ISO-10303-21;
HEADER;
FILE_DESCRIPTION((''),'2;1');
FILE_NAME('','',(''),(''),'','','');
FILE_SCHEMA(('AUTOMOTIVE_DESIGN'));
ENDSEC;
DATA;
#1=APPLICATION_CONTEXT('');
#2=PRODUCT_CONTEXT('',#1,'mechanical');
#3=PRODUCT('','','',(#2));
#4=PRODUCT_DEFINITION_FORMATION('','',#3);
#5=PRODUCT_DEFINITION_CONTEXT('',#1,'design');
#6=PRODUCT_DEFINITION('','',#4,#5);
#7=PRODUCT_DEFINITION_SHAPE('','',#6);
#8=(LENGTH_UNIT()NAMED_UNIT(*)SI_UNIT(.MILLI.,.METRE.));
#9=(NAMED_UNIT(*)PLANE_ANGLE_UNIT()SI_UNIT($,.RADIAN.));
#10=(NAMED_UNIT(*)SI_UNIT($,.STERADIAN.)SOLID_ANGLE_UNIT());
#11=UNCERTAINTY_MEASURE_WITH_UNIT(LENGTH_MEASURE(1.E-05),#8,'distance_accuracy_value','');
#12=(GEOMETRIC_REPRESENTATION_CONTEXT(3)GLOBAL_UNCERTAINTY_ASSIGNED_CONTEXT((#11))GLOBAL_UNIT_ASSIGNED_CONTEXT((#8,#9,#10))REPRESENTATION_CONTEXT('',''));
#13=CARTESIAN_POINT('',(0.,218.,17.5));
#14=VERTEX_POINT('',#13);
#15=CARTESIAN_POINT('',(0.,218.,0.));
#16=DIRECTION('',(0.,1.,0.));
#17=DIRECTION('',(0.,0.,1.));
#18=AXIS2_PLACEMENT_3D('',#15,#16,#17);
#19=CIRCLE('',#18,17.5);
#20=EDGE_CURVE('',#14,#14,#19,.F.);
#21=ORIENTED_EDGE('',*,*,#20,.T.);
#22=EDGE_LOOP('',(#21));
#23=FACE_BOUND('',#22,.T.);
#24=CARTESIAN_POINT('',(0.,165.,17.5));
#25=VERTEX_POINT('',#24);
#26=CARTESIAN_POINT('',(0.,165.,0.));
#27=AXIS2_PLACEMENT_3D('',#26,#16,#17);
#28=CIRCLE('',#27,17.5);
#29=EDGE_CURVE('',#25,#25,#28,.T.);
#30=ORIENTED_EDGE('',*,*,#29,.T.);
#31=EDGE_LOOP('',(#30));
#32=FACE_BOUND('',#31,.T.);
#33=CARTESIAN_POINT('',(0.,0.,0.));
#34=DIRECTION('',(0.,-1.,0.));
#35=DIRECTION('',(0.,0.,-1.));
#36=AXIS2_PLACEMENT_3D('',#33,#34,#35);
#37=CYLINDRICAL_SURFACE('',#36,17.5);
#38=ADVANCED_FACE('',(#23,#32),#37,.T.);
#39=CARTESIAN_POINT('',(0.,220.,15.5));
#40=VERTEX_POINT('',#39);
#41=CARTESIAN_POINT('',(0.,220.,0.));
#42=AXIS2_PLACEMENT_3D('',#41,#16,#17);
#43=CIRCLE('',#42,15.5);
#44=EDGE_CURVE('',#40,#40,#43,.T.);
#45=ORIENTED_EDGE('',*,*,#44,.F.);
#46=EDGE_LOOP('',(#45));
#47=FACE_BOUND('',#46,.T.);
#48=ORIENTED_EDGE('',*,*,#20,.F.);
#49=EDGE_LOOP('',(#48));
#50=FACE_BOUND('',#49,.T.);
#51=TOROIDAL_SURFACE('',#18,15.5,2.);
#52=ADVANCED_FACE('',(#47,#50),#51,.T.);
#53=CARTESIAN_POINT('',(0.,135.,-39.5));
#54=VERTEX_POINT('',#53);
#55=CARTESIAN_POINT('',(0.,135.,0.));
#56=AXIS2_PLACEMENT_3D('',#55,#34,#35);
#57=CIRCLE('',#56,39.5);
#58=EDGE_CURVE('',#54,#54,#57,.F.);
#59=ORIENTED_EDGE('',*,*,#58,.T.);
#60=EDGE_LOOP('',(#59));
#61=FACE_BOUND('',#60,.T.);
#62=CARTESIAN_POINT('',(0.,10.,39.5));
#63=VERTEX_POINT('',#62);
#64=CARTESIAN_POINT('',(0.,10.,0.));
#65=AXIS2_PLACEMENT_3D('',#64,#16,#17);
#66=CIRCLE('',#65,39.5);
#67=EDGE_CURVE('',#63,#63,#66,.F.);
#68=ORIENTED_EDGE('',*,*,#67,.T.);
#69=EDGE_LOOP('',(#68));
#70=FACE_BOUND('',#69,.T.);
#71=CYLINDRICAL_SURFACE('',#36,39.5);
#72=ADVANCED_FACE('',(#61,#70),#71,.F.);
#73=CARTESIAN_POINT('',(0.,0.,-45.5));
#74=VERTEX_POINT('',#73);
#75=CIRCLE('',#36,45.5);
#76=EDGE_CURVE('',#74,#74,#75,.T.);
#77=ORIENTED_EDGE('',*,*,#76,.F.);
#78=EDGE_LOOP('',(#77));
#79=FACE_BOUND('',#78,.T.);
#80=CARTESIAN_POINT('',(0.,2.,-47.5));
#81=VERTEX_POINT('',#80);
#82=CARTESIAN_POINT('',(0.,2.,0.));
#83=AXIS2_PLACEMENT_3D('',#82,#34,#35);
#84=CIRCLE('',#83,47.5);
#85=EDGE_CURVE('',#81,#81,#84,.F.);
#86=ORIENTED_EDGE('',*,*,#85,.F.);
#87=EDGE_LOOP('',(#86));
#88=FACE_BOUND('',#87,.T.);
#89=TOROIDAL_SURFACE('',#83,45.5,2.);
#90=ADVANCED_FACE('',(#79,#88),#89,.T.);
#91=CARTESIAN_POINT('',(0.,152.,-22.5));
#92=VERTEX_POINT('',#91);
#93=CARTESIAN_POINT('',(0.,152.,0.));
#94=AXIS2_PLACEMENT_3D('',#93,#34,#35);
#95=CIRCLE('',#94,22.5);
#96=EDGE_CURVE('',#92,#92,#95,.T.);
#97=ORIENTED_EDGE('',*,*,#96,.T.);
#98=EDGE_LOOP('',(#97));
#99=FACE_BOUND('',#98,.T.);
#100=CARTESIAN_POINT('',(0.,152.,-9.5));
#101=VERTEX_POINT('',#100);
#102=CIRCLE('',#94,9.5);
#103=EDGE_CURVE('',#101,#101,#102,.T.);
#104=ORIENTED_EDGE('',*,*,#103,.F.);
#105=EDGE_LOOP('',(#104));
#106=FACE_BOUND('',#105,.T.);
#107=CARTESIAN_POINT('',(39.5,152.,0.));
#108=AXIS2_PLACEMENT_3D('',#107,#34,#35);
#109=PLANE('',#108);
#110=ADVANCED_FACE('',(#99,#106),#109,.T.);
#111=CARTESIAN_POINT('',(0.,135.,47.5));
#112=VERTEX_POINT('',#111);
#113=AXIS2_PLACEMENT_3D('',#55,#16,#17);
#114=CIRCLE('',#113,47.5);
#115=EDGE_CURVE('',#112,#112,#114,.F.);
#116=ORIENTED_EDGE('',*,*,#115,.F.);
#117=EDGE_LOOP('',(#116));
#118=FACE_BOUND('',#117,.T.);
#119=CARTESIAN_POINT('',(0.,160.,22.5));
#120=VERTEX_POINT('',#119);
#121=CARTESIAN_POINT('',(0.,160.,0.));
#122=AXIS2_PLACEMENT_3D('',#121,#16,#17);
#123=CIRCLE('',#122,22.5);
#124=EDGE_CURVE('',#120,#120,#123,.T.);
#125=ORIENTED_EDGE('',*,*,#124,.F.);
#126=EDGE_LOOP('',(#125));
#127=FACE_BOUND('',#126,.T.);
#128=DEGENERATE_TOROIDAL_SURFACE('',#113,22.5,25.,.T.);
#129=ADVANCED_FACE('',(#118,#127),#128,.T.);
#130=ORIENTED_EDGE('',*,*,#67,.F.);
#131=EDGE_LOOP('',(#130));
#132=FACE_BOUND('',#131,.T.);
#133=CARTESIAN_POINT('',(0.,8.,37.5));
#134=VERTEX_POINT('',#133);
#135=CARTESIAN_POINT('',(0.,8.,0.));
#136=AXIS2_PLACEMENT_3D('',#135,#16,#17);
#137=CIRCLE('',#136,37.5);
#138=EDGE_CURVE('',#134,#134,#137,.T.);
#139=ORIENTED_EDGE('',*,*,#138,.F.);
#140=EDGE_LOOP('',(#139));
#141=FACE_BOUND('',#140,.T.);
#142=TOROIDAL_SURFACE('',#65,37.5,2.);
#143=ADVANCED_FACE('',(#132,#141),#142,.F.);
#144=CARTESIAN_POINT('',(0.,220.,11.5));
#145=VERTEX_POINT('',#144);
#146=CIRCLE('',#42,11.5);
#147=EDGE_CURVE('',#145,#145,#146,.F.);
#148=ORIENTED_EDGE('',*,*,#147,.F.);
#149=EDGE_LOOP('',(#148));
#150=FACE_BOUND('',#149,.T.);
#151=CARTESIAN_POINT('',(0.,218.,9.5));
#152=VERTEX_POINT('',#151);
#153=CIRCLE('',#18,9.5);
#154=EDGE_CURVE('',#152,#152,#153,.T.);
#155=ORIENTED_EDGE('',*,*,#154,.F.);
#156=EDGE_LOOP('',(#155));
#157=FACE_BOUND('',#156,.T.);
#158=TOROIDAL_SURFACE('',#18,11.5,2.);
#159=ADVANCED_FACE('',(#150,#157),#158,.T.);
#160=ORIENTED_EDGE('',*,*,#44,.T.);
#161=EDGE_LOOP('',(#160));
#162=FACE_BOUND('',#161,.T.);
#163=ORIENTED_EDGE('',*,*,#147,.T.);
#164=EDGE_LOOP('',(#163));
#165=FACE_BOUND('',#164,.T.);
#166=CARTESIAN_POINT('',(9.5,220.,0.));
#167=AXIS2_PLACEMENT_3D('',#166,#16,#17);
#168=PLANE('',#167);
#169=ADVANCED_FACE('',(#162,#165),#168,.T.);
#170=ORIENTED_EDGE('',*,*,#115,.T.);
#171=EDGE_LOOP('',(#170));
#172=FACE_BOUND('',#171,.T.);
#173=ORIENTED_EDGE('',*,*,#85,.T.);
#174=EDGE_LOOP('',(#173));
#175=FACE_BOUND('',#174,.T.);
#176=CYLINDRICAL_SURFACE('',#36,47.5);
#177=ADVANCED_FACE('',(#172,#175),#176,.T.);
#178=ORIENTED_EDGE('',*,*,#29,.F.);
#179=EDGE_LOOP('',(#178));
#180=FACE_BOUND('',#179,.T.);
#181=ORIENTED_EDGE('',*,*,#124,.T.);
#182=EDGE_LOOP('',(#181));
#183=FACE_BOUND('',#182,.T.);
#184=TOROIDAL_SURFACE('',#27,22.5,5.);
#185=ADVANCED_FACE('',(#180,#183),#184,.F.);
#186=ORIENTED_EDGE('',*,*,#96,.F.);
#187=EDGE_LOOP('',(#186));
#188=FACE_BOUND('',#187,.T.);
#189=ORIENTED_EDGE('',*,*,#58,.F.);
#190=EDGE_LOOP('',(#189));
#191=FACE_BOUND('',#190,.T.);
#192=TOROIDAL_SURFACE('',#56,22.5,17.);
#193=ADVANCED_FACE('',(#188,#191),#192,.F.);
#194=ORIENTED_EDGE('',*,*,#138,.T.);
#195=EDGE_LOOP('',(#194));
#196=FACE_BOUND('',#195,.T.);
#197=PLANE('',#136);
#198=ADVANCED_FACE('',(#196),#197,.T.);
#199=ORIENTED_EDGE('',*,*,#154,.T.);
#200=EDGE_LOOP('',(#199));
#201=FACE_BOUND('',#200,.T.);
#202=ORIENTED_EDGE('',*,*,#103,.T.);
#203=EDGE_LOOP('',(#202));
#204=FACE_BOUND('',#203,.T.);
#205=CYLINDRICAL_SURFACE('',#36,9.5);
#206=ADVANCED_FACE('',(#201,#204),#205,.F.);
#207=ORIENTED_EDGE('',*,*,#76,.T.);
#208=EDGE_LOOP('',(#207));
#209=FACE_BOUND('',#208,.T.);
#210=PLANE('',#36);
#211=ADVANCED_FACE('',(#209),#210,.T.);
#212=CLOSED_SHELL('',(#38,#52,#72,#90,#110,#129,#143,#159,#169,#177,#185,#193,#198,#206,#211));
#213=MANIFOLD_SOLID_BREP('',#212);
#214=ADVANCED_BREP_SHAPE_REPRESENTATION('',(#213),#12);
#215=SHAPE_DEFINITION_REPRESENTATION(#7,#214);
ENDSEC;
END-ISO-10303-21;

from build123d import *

# Parameters (mm, degrees)
FILLET1_R = 25
FILLET2_R = 5
FILLET3_R = 2
FILLET4_R = 2
FILLET5_R = 17
FILLET6_R = 2
FILLET7_R = 2


with BuildPart() as part:
    # Sketch2 → Revolve1 (revolve)
    with BuildSketch(Plane.XY, mode=Mode.PRIVATE) as revolve1_sk:
        Polygon((0, 0), (47.5, 0), (47.5, 160), (17.5, 160), (17.5, 220), (9.5, 220), (9.5, 152), (39.5, 152), (39.5, 8), (0, 8), align=None)
    revolve(revolve1_sk.sketch.rotate(Axis((0, 0, 0), (0, 1, 0)), 90), axis=Axis((0, 0, 0), (0, 1, 0)))

    # Fillet1
    fillet1_edges = [part.edges().sort_by_distance(p)[0] for p in [
        (0, 160, 47.5),
    ]]
    fillet(fillet1_edges, radius=FILLET1_R)

    # Fillet2
    fillet2_edges = [part.edges().sort_by_distance(p)[0] for p in [
        (0, 160, 17.5),
    ]]
    fillet(fillet2_edges, radius=FILLET2_R - 0.0001)  # a hair under: the kernel refuses the full size

    # Fillet3
    fillet3_edges = [part.edges().sort_by_distance(p)[0] for p in [
        (0, 220, 17.5),
    ]]
    fillet(fillet3_edges, radius=FILLET3_R)

    # Fillet4
    fillet4_edges = [part.edges().sort_by_distance(p)[0] for p in [
        (0, 0, 47.5),
    ]]
    fillet(fillet4_edges, radius=FILLET4_R)

    # Fillet5
    fillet5_edges = [part.edges().sort_by_distance(p)[0] for p in [
        (0, 152, 39.5),
    ]]
    fillet(fillet5_edges, radius=FILLET5_R)

    # Fillet6
    fillet6_edges = [part.edges().sort_by_distance(p)[0] for p in [
        (0, 8, 39.5),
    ]]
    fillet(fillet6_edges, radius=FILLET6_R)

    # Fillet7
    fillet7_edges = [part.edges().sort_by_distance(p)[0] for p in [
        (0, 220, 9.5),
    ]]
    fillet(fillet7_edges, radius=FILLET7_R)


solid = part.part
